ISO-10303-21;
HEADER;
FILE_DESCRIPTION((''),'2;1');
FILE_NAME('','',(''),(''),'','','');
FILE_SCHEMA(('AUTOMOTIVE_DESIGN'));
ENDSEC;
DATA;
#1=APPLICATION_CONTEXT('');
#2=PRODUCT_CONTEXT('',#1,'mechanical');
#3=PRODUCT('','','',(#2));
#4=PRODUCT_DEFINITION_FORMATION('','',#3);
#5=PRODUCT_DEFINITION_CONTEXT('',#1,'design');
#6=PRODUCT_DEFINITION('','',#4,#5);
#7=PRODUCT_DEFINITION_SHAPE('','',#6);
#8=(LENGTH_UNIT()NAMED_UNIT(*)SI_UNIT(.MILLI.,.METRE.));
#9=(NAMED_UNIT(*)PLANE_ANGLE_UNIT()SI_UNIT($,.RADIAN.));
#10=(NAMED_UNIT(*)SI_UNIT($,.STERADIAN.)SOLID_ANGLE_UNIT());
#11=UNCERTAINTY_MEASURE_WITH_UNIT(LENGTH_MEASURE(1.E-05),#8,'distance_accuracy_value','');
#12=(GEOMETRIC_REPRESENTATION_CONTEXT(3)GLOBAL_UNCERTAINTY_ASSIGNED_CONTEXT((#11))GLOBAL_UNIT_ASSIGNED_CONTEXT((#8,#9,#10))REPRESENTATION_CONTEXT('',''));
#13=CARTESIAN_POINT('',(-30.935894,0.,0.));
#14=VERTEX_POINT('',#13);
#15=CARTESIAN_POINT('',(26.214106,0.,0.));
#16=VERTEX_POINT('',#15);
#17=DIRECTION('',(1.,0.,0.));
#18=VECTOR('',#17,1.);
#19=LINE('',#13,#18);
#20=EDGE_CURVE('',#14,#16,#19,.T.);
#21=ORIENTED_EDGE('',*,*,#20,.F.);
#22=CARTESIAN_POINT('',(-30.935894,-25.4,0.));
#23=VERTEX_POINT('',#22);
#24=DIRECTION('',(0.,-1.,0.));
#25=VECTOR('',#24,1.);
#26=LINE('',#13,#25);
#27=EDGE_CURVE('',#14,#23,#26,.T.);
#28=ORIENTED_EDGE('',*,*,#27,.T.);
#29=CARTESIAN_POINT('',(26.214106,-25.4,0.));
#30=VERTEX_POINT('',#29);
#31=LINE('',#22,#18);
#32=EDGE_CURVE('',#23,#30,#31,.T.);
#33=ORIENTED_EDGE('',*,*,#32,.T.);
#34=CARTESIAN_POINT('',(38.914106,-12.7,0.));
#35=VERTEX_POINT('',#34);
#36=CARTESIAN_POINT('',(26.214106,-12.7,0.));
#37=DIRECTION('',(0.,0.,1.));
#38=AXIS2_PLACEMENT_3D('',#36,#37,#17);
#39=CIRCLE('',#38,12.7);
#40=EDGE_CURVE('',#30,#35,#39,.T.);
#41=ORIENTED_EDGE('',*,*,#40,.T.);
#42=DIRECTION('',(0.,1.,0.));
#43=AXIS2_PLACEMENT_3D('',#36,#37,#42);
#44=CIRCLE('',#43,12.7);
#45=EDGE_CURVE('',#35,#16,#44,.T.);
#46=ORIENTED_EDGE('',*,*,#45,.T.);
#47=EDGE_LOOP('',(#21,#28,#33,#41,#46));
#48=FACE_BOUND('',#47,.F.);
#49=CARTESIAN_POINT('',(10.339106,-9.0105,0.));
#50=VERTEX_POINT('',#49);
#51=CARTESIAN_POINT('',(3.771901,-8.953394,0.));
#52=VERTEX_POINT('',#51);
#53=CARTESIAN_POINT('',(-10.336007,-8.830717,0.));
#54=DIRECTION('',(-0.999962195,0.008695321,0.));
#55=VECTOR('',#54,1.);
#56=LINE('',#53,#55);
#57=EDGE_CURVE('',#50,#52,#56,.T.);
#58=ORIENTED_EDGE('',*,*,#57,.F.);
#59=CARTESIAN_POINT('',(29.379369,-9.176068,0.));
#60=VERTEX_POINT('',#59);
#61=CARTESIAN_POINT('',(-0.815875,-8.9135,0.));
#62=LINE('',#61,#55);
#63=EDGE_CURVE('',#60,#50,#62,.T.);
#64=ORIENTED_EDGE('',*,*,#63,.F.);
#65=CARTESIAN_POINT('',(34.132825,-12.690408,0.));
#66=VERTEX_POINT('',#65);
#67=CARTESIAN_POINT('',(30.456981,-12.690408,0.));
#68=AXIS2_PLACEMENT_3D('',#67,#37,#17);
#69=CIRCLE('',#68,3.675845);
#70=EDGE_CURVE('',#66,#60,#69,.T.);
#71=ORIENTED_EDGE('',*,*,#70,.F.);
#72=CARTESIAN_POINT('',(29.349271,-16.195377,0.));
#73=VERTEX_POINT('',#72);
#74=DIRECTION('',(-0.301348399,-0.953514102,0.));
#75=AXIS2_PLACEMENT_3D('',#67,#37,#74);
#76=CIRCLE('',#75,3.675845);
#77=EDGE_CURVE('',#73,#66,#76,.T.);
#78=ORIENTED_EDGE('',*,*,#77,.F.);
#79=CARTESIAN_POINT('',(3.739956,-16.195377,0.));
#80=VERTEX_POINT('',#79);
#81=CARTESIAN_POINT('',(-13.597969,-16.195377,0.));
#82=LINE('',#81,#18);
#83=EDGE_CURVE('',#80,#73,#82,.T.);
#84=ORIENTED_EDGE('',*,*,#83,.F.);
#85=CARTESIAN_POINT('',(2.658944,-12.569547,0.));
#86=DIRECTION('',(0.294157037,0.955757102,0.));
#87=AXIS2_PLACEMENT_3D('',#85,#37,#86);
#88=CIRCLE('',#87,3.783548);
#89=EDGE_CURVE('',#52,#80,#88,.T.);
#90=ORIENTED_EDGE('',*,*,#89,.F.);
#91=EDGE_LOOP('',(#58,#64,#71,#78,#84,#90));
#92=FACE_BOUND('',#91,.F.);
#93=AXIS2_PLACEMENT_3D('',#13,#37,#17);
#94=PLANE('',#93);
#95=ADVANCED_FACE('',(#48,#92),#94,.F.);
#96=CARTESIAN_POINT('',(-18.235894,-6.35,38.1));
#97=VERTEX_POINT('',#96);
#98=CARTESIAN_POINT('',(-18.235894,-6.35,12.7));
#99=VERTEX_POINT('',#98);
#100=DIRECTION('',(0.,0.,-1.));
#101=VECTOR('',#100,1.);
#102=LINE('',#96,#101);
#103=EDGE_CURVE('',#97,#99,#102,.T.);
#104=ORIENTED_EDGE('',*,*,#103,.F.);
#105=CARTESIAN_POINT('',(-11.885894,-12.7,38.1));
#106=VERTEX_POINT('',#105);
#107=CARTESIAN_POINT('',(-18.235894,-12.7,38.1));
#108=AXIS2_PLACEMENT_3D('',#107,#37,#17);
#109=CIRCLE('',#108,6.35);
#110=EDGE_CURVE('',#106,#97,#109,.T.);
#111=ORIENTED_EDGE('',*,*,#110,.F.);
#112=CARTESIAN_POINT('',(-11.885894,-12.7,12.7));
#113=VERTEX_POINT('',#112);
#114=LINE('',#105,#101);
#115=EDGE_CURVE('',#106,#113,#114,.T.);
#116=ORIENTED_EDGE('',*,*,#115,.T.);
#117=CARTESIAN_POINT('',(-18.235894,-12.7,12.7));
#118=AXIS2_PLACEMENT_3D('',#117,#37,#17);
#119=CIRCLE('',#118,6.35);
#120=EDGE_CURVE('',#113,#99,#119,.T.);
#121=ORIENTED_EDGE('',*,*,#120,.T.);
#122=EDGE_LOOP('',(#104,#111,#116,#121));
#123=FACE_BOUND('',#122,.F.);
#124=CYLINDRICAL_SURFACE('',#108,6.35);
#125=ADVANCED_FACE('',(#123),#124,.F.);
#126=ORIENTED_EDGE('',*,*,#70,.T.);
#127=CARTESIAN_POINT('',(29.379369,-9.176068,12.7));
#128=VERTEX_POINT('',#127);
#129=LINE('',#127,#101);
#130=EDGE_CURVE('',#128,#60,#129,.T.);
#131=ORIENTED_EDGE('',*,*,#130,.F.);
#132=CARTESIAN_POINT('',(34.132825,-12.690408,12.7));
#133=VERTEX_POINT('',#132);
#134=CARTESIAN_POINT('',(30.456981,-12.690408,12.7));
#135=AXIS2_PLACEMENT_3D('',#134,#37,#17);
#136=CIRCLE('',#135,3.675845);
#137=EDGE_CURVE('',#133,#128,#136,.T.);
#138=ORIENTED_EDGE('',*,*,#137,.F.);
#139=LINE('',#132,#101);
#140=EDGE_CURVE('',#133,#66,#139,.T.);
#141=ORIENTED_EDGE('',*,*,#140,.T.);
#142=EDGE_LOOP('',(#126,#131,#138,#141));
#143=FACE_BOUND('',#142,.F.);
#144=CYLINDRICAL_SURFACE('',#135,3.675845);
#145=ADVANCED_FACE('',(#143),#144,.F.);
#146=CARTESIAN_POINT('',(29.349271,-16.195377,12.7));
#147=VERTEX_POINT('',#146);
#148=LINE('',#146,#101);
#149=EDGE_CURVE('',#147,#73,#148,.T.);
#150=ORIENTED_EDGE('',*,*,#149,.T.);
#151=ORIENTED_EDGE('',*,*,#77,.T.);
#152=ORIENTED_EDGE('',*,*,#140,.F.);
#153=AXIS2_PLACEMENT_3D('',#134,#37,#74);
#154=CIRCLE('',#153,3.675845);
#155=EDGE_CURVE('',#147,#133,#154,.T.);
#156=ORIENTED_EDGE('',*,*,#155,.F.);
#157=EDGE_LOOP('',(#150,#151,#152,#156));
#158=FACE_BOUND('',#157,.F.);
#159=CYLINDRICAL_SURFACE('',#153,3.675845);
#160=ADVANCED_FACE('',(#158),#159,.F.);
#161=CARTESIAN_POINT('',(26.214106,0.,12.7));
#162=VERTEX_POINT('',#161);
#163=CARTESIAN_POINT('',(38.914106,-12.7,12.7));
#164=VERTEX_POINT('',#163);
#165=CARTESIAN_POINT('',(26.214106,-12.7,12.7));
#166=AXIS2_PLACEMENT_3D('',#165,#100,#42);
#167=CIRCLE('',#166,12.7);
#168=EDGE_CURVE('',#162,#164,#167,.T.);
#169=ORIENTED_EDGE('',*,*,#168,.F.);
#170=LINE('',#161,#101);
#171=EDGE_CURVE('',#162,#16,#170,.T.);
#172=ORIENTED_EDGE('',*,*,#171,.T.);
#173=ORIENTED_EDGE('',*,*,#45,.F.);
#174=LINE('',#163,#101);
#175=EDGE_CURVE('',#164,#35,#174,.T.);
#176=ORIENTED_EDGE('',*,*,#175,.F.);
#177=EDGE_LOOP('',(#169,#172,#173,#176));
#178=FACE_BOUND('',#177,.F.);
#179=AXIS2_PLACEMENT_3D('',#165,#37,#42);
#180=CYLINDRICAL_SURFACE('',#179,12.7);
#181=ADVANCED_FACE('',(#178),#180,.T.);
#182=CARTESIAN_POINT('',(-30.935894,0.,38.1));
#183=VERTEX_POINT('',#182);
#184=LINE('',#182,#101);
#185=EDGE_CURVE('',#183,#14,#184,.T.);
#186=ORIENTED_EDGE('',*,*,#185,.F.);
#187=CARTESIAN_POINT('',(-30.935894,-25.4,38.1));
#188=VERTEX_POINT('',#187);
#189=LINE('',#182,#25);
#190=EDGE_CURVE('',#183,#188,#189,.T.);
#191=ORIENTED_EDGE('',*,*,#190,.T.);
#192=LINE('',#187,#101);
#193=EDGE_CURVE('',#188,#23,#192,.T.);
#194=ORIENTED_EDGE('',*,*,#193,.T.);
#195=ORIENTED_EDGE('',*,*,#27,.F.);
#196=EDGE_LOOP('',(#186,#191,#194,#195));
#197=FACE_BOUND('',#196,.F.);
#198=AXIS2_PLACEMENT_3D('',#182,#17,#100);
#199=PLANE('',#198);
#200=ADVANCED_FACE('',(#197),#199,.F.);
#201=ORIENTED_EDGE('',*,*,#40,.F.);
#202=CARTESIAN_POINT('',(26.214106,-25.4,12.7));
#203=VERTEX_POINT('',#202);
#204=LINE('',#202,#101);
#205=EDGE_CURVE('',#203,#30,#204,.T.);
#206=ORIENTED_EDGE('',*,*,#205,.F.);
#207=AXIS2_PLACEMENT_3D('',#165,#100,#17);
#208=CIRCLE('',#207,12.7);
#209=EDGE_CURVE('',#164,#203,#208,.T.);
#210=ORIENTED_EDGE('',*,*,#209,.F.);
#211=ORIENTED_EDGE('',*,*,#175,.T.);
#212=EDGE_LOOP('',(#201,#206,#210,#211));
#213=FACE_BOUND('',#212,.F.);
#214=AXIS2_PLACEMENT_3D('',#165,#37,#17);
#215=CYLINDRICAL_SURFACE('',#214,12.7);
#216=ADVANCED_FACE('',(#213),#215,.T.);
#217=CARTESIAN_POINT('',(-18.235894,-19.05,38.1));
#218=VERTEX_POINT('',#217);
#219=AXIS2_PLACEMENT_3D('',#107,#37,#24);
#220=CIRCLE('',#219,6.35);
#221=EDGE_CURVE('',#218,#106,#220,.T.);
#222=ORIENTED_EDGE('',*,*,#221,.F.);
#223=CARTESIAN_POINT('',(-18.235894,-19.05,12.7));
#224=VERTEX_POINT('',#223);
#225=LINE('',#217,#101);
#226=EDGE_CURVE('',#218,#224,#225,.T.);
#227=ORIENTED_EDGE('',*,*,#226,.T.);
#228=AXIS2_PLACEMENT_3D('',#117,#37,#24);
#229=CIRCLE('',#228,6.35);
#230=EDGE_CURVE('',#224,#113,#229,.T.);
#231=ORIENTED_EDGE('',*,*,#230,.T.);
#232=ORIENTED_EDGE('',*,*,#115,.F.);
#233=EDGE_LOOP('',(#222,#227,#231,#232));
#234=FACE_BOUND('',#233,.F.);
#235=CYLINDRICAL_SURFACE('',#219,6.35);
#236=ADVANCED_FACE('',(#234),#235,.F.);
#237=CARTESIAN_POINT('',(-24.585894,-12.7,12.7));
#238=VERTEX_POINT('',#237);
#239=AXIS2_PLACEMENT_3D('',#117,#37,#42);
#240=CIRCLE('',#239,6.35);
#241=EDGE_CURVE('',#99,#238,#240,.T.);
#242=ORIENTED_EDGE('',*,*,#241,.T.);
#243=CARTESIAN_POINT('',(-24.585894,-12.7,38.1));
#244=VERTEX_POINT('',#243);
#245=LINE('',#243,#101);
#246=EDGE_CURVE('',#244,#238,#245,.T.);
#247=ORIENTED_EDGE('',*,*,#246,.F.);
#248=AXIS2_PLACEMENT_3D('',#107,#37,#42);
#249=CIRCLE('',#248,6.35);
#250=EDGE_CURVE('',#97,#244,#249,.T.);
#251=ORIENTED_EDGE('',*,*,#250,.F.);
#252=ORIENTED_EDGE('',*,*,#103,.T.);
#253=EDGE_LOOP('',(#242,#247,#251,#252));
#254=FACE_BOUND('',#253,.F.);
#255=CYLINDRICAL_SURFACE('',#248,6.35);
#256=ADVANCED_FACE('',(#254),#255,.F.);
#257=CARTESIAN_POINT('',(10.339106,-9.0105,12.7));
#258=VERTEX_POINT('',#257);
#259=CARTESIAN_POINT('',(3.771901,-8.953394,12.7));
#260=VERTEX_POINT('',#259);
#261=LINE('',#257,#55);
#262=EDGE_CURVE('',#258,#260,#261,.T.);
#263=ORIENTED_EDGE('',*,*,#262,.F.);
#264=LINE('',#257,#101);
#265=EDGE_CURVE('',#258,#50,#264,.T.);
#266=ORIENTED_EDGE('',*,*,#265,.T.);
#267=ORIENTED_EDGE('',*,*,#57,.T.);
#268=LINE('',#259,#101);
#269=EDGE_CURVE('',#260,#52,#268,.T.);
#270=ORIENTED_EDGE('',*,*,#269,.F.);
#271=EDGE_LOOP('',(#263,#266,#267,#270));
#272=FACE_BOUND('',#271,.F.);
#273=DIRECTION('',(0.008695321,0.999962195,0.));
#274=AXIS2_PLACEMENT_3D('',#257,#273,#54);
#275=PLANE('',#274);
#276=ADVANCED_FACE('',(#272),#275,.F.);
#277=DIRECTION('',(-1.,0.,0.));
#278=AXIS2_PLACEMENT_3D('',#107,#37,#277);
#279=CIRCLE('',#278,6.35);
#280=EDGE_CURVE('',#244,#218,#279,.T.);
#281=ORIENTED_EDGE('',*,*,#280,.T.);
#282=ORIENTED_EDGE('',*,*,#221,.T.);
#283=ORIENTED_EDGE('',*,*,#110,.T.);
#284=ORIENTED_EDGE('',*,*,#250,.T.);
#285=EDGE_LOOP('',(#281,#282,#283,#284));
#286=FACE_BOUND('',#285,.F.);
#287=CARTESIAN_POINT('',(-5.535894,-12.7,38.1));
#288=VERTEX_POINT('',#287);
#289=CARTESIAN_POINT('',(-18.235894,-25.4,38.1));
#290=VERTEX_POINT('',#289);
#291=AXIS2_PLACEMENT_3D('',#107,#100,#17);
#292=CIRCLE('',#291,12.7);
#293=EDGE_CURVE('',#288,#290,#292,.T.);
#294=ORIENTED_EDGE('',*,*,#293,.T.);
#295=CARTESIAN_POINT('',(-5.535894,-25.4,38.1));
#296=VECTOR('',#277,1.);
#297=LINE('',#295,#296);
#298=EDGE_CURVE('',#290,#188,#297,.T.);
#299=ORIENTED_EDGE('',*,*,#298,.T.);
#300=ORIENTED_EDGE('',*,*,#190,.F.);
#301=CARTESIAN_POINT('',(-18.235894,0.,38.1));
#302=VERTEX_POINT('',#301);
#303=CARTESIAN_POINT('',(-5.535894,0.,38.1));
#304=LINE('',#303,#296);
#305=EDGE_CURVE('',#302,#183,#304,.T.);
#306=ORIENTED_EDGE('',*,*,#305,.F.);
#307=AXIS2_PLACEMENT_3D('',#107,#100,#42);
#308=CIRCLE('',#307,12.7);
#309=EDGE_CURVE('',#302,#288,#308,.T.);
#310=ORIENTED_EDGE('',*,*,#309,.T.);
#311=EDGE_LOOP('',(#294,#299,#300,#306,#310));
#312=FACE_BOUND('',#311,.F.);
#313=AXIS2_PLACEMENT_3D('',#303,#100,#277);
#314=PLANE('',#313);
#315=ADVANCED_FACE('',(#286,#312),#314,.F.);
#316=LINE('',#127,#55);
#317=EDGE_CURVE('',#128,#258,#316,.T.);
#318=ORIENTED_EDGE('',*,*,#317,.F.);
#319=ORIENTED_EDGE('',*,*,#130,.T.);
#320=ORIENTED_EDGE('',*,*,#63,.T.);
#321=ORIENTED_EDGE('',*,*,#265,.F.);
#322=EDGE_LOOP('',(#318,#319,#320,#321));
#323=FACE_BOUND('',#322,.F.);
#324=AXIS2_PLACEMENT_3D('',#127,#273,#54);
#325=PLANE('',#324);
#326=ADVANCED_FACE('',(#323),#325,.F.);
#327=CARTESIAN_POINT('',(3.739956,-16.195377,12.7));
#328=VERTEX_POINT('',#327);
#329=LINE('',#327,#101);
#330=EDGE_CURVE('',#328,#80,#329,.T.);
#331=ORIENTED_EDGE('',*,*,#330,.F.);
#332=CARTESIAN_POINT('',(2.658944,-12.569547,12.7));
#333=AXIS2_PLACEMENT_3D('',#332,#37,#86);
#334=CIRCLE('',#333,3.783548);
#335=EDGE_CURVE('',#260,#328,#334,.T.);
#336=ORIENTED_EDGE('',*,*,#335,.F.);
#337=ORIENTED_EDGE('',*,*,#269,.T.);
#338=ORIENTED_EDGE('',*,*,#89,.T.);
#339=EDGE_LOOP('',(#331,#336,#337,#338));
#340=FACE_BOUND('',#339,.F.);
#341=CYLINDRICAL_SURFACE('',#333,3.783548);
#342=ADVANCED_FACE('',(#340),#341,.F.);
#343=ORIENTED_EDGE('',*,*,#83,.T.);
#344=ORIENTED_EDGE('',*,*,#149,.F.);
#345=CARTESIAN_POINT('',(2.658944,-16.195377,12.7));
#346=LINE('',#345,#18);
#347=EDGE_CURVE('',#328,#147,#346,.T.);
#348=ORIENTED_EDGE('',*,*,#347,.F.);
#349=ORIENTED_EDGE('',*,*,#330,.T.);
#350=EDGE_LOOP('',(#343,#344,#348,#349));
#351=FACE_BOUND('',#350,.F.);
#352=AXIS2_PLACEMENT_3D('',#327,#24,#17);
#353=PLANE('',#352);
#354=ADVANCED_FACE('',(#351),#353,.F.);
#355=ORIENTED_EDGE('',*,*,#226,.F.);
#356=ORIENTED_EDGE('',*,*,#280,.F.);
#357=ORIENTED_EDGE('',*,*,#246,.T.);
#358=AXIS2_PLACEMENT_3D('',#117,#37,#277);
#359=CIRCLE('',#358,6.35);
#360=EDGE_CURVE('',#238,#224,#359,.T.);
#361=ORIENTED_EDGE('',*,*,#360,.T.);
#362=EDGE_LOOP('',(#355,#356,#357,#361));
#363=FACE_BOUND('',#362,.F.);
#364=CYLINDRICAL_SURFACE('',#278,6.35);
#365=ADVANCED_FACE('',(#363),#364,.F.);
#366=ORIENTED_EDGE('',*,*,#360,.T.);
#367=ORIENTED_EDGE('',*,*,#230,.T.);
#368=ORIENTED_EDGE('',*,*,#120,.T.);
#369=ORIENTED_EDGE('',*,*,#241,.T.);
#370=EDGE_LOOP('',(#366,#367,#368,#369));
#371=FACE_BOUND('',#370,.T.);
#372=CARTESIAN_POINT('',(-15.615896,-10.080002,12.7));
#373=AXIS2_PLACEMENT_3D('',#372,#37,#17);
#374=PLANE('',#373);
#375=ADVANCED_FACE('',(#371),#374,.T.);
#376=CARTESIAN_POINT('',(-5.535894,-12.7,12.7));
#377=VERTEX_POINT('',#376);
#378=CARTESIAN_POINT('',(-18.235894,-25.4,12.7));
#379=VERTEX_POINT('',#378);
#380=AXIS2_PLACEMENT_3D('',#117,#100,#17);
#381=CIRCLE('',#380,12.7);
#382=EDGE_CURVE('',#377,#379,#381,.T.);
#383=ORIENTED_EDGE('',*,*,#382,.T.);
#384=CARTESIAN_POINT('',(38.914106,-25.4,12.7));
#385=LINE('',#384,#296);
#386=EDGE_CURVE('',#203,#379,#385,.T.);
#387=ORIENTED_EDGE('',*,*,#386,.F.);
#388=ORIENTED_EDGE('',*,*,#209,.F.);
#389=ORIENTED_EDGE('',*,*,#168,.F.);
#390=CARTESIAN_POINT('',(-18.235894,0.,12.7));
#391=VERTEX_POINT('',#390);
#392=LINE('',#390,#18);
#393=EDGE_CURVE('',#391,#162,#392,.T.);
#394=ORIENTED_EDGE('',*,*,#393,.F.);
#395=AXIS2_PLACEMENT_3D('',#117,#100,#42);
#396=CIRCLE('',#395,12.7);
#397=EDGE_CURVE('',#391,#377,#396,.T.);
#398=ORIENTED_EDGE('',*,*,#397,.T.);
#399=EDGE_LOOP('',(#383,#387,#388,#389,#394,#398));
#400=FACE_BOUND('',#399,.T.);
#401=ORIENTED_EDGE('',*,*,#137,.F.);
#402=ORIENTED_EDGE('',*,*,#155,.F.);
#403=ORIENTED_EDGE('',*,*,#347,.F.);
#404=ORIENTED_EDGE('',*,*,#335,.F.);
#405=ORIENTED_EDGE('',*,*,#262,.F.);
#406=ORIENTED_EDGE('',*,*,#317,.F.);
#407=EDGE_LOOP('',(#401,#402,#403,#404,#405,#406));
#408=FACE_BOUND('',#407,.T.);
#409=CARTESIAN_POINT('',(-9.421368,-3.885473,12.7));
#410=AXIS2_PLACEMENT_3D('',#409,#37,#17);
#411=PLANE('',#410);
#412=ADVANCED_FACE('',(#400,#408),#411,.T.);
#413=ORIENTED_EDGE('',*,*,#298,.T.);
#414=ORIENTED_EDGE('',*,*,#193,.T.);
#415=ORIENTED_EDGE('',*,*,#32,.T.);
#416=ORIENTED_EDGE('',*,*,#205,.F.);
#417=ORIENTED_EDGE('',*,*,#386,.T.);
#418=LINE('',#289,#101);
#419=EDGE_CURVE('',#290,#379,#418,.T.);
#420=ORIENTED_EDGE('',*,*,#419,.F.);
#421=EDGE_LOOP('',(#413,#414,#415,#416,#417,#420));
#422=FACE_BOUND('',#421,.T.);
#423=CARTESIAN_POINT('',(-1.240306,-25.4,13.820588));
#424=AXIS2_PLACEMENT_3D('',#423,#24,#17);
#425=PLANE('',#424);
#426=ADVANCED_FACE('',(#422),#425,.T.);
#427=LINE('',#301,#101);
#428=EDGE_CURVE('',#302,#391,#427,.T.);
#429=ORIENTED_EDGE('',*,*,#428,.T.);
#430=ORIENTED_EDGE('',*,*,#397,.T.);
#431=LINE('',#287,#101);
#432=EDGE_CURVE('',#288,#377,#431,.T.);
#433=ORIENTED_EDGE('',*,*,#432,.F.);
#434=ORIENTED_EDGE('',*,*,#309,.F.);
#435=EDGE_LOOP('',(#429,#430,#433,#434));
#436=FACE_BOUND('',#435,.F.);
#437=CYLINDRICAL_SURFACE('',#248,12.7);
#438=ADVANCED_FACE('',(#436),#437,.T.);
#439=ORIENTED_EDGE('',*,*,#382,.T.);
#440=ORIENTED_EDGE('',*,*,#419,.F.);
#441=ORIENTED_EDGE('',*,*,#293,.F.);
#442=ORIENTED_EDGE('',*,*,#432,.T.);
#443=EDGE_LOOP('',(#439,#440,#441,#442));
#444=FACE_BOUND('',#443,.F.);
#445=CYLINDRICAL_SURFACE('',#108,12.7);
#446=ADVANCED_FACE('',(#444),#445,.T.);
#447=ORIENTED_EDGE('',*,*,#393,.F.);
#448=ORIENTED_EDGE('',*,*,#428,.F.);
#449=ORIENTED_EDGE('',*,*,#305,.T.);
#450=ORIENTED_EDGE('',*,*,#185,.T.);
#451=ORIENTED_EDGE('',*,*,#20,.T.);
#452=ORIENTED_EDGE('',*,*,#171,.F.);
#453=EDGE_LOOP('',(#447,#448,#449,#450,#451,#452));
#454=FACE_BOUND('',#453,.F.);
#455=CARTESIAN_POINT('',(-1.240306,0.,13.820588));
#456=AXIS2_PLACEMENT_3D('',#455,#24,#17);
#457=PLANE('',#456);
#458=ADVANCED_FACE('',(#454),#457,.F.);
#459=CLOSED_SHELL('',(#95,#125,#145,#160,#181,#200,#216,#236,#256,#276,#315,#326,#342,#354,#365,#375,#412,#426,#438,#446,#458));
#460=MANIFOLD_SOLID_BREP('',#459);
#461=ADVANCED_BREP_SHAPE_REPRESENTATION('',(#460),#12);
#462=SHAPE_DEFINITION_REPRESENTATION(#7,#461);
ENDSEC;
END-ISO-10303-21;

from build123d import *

# Parameters (mm, degrees)
F1_DEPTH = 25.4
F3_DEPTH = 25.4
F5_DEPTH = 25.4
F7_DEPTH = 25.4
F9_DEPTH = 25.4


# Not quite as in the source:
# - a feature names something its author has since deleted; it is built from what else it names


with BuildPart() as f1:
    # F0 (on Front) → F1 (new body)
    with BuildSketch(Plane.XZ):
        Polygon((-5.5358944303, 38.1), (-30.9358944303, 38.1), (-30.9358944303, 0), (38.9141055698, 0), (38.9141055697, 12.7), (-5.5358944303, 12.7), align=None)
    extrude(amount=F1_DEPTH)

    # F2 (on face) → F3 (cut)
    with BuildSketch(Plane.XY.offset(38.1)):
        with BuildLine():
            ThreePointArc((-11.8858944302, -12.7), (-13.7457663697, -8.2098719395), (-18.2358944302, -6.35))
            Line((-18.2358944303, -6.35), (-18.2358944303, -12.7))
            Line((-18.2358944302, -12.7), (-11.8858944302, -12.7))
        make_face()
        with BuildLine():
            Line((-11.8858944302, -12.7), (-18.2358944302, -12.7))
            Line((-18.2358944303, -12.7), (-18.2358944303, -19.05))
            ThreePointArc((-18.2358944302, -19.05), (-13.7457663697, -17.1901280605), (-11.8858944302, -12.7))
        make_face()
        with BuildLine():
            Line((-18.2358944302, -12.7), (-24.5858944303, -12.7))
            ThreePointArc((-24.5858944303, -12.7), (-22.7260224908, -17.1901280605), (-18.2358944302, -19.05))
            Line((-18.2358944303, -19.05), (-18.2358944303, -12.7))
        make_face()
        with BuildLine():
            Line((-18.2358944303, -12.7), (-18.2358944303, -6.35))
            ThreePointArc((-18.2358944302, -6.35), (-22.7260224908, -8.2098719395), (-24.5858944303, -12.7))
            Line((-24.5858944303, -12.7), (-18.2358944302, -12.7))
        make_face()
        with BuildLine():
            Line((-5.5358944303, 0), (-18.2358944303, 0))
            ThreePointArc((-18.2358944303, 0), (-9.2556383092, -3.7197438789), (-5.5358944303, -12.7))
            Line((-5.5358944303, -12.7), (-5.5358944303, 0))
        make_face()
        with BuildLine():
            Line((-5.5358944303, -25.4), (-5.5358944303, -12.7))
            ThreePointArc((-5.5358944303, -12.7), (-9.2556383092, -21.6802561211), (-18.2358944303, -25.4))
            Line((-18.2358944303, -25.4), (-5.5358944303, -25.4))
        make_face()
    extrude(amount=-F3_DEPTH, mode=Mode.SUBTRACT)

    # F4 (on face) → F5 (cut)
    with BuildSketch(Plane.XY.offset(12.7)):
        with BuildLine():
            Line((29.3793692031, -9.1760675128), (10.3391055697, -9.0105000585))
            Line((10.3391055697, -9.0105000585), (10.3391055697, -16.195377335))
            Line((10.3391055697, -16.195377335), (29.3492708089, -16.195377335))
            ThreePointArc((29.3492708089, -16.195377335), (26.7811699001, -12.6746460258), (29.3793692031, -9.1760675128))
        make_face()
        with BuildLine():
            Line((10.3391055697, -16.195377335), (10.3391055697, -9.0105000585))
            Line((10.3391055697, -9.0105000585), (3.7719008779, -8.9533939498))
            ThreePointArc((3.7719008779, -8.9533939498), (5.7024746114, -10.3218470376), (6.442491519, -12.5695466995))
            ThreePointArc((6.442491519, -12.5695466995), (5.6925301995, -14.8306497777), (3.7399555387, -16.195377335))
            Line((3.7399555387, -16.195377335), (10.3391055697, -16.195377335))
        make_face()
        with BuildLine():
            ThreePointArc((34.132825273, -12.6904076897), (32.6422382322, -9.7346534929), (29.3793692031, -9.1760675128))
            Line((29.3793692031, -9.1760675128), (30.4569806904, -9.1854380444))
            Line((30.4569806904, -9.1854380444), (30.4569806904, -16.195377335))
            Line((30.4569806904, -16.195377335), (29.3492708089, -16.195377335))
            ThreePointArc((29.3492708089, -16.195377335), (32.6295441565, -15.6555048856), (34.132825273, -12.6904076897))
        make_face()
        with BuildLine():
            Line((30.4569806904, -9.1854380444), (29.3793692031, -9.1760675128))
            ThreePointArc((29.3793692031, -9.1760675128), (26.7811699001, -12.6746460258), (29.3492708089, -16.195377335))
            Line((29.3492708089, -16.195377335), (30.4569806904, -16.195377335))
            Line((30.4569806904, -16.195377335), (30.4569806904, -9.1854380444))
        make_face()
        with BuildLine():
            ThreePointArc((6.442491519, -12.5695466995), (5.7024746114, -10.3218470376), (3.7719008779, -8.9533939498))
            Line((3.7719008779, -8.9533939498), (2.6589436457, -8.9437160641))
            Line((2.6589436457, -8.9437160641), (2.6589436457, -16.195377335))
            Line((2.6589436457, -16.195377335), (3.7399555387, -16.195377335))
            ThreePointArc((3.7399555387, -16.195377335), (5.6925301995, -14.8306497777), (6.442491519, -12.5695466995))
        make_face()
        with BuildLine():
            Line((2.6589436457, -8.9437160641), (3.7719008779, -8.9533939498))
            ThreePointArc((3.7719008779, -8.9533939498), (-1.1245674179, -12.5528571357), (3.7399555387, -16.195377335))
            Line((3.7399555387, -16.195377335), (2.6589436457, -16.195377335))
            Line((2.6589436457, -16.195377335), (2.6589436457, -8.9437160641))
        make_face()
    extrude(amount=-F5_DEPTH, mode=Mode.SUBTRACT)

    # F6 (on face) → F7 (cut)
    with BuildSketch(Plane.XY.offset(12.7)):
        with BuildLine():
            Line((38.9141055697, -12.7), (38.9141055697, 0))
            Line((38.9141055697, 0), (26.2141055698, 0))
            ThreePointArc((26.2141055698, 0), (35.1943616908, -3.7197438789), (38.9141055697, -12.7))
        make_face()
    extrude(amount=-F7_DEPTH, mode=Mode.SUBTRACT)

    # F8 (on face) → F9 (cut)
    with BuildSketch(Plane.XY.offset(12.7)):
        with BuildLine():
            Line((38.9141055697, -25.4), (38.9141055697, -12.7))
            ThreePointArc((38.9141055697, -12.7), (35.1943616908, -21.6802561211), (26.2141055698, -25.4))
            Line((26.2141055698, -25.4), (38.9141055697, -25.4))
        make_face()
    extrude(amount=-F9_DEPTH, mode=Mode.SUBTRACT)


solid = f1.part
